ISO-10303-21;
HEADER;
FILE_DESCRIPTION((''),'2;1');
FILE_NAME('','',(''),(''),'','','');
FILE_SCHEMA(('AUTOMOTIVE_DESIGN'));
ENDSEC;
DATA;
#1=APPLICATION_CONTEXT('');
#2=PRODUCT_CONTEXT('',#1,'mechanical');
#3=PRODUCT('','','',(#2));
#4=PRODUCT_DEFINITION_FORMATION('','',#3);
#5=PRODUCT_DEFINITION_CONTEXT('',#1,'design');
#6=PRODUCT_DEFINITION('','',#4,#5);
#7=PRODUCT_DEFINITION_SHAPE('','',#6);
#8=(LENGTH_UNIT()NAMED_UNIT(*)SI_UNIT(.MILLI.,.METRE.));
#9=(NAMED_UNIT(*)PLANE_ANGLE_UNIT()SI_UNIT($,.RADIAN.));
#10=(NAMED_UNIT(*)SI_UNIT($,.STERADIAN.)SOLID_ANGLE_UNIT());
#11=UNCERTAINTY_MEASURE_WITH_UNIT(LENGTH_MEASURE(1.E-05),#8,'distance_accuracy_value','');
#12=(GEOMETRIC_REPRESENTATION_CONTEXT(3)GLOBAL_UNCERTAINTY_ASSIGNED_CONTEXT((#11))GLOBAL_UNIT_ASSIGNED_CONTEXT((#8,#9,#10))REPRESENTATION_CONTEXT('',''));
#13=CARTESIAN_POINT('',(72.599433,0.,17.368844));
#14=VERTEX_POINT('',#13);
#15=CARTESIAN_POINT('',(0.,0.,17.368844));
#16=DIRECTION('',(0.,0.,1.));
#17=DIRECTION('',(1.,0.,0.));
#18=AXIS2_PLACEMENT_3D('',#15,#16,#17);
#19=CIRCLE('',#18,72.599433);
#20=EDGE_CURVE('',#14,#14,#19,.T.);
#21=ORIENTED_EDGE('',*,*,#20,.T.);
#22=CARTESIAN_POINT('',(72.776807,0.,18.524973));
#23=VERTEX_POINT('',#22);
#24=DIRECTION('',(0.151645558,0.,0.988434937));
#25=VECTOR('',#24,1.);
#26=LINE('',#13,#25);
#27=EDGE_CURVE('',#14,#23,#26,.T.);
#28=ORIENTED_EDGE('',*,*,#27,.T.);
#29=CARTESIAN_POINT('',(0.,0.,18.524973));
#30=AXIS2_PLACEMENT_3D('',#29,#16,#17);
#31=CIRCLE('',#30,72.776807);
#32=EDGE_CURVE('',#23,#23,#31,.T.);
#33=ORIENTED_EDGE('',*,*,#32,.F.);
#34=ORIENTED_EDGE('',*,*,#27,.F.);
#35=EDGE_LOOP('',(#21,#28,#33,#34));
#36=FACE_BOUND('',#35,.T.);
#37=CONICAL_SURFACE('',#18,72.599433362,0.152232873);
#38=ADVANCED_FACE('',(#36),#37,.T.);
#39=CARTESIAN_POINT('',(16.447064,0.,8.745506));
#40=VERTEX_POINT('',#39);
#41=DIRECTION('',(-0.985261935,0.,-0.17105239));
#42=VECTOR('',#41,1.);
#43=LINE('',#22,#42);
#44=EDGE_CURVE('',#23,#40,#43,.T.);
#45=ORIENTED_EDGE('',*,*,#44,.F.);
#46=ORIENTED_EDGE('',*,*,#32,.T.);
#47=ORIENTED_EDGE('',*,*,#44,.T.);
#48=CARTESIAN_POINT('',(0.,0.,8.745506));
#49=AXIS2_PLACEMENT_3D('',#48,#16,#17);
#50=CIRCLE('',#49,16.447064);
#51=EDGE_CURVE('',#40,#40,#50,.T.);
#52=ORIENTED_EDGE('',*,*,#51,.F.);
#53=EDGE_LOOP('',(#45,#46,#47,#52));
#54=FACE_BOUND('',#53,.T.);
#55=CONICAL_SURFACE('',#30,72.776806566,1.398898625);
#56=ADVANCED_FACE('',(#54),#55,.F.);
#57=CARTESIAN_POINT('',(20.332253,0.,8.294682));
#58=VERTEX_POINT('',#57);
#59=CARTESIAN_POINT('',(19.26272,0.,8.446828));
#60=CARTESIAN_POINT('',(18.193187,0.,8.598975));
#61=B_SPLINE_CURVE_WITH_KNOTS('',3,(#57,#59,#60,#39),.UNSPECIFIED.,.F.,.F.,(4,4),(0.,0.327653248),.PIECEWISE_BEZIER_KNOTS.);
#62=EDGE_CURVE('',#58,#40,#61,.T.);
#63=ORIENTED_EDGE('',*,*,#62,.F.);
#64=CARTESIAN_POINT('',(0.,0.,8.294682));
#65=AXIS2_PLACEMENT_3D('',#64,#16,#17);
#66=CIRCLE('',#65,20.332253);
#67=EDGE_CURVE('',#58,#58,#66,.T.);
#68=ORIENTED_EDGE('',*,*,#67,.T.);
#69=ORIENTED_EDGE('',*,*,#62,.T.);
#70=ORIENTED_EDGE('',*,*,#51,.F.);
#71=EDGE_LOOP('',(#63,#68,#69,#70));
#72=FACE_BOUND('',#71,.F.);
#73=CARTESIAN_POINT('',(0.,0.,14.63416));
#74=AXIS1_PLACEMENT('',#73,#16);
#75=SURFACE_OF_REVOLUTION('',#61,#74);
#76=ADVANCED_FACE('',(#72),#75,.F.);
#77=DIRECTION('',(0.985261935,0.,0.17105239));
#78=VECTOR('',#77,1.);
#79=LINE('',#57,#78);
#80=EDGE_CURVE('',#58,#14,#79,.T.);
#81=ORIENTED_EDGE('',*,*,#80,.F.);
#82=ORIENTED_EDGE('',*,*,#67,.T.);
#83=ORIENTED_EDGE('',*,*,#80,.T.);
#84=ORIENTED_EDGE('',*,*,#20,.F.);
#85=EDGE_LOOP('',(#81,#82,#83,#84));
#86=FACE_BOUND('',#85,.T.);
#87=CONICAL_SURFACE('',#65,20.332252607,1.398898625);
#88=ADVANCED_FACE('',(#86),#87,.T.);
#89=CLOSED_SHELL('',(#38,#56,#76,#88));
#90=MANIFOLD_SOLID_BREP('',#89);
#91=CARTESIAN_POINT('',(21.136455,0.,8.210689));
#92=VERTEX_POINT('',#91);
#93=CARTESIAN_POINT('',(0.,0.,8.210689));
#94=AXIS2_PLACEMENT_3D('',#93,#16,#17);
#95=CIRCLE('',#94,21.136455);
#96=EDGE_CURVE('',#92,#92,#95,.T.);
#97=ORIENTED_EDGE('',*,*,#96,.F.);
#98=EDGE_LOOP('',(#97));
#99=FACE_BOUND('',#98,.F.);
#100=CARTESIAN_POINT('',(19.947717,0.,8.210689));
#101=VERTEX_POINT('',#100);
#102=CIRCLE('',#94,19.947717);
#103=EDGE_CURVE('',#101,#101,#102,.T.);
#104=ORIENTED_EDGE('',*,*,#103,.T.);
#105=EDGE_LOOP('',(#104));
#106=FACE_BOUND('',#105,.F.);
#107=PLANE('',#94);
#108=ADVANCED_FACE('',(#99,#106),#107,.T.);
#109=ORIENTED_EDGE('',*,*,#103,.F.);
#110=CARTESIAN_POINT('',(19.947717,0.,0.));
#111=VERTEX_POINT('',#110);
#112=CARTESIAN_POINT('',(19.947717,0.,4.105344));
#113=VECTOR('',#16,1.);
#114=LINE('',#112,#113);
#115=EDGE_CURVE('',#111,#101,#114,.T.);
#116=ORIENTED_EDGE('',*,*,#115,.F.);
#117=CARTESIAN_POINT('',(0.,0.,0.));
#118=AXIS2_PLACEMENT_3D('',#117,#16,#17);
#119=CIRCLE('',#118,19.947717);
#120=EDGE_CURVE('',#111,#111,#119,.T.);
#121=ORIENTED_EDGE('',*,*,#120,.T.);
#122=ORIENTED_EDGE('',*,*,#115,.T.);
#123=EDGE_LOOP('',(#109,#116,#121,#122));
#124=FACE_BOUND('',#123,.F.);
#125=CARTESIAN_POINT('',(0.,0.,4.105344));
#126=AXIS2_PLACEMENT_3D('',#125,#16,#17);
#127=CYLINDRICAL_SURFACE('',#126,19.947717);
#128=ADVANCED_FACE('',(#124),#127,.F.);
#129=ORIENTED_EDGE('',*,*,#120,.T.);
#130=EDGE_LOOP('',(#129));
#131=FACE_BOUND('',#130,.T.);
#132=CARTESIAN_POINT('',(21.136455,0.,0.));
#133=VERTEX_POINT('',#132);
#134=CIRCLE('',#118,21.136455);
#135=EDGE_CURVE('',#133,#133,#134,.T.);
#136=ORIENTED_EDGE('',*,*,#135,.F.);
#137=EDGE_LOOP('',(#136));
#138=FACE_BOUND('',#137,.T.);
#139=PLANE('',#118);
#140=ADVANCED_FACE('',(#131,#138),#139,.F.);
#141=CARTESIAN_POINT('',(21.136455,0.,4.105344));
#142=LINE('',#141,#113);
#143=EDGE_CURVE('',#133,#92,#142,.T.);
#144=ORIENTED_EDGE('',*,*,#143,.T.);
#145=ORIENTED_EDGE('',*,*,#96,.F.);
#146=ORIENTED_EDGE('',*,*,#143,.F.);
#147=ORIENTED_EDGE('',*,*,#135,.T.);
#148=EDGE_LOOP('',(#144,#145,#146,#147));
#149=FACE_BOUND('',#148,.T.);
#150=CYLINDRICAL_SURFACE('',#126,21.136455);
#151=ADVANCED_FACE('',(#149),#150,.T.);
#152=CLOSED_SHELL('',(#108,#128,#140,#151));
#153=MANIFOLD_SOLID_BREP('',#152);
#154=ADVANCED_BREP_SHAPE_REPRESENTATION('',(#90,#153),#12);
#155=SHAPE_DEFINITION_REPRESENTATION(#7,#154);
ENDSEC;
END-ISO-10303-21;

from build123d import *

# Parameters (mm, degrees)
F0_W = 1.1887382716
F0_H = 8.2106888294


# Not quite as in the source:
# - the program builds the solid bodies; features that only make, move or delete a surface that nothing else refers to are left out


with BuildPart() as f2:
    # F0 (on Front) → F2 (revolve)
    with BuildSketch(Plane.XZ):
        with Locations((20.5420861021, 4.1053444147)):
            Rectangle(F0_W, F0_H)
    revolve(axis=Axis((0, 0, 14.6341603249), (0, 0, 1)))


with BuildPart() as f4:
    # F3 (on Front) → F4 (revolve)
    with BuildSketch(Plane.XZ):
        with BuildLine():
            add(Edge.make_bspline(
                [(20.3322526067, 8.2946820185), (19.2627200389, 8.4468284836), (18.1931874711, 8.5989749487), (16.4470637122, 8.7455055095)],
                knots=[0, 0, 0, 0, 0.3276532475, 0.3276532475, 0.3276532475, 0.3276532475], degree=3))
            Line((20.3322526067, 8.2946820185), (72.5994333625, 17.368843779))
            Line((72.5994333625, 17.368843779), (72.7768065665, 18.5249730683))
            Line((72.7768065665, 18.5249730683), (16.4470637122, 8.7455055095))
        make_face()
    revolve(axis=Axis((0, 0, 14.6341603249), (0, 0, 1)))


solid = Compound([f2.part, f4.part])
